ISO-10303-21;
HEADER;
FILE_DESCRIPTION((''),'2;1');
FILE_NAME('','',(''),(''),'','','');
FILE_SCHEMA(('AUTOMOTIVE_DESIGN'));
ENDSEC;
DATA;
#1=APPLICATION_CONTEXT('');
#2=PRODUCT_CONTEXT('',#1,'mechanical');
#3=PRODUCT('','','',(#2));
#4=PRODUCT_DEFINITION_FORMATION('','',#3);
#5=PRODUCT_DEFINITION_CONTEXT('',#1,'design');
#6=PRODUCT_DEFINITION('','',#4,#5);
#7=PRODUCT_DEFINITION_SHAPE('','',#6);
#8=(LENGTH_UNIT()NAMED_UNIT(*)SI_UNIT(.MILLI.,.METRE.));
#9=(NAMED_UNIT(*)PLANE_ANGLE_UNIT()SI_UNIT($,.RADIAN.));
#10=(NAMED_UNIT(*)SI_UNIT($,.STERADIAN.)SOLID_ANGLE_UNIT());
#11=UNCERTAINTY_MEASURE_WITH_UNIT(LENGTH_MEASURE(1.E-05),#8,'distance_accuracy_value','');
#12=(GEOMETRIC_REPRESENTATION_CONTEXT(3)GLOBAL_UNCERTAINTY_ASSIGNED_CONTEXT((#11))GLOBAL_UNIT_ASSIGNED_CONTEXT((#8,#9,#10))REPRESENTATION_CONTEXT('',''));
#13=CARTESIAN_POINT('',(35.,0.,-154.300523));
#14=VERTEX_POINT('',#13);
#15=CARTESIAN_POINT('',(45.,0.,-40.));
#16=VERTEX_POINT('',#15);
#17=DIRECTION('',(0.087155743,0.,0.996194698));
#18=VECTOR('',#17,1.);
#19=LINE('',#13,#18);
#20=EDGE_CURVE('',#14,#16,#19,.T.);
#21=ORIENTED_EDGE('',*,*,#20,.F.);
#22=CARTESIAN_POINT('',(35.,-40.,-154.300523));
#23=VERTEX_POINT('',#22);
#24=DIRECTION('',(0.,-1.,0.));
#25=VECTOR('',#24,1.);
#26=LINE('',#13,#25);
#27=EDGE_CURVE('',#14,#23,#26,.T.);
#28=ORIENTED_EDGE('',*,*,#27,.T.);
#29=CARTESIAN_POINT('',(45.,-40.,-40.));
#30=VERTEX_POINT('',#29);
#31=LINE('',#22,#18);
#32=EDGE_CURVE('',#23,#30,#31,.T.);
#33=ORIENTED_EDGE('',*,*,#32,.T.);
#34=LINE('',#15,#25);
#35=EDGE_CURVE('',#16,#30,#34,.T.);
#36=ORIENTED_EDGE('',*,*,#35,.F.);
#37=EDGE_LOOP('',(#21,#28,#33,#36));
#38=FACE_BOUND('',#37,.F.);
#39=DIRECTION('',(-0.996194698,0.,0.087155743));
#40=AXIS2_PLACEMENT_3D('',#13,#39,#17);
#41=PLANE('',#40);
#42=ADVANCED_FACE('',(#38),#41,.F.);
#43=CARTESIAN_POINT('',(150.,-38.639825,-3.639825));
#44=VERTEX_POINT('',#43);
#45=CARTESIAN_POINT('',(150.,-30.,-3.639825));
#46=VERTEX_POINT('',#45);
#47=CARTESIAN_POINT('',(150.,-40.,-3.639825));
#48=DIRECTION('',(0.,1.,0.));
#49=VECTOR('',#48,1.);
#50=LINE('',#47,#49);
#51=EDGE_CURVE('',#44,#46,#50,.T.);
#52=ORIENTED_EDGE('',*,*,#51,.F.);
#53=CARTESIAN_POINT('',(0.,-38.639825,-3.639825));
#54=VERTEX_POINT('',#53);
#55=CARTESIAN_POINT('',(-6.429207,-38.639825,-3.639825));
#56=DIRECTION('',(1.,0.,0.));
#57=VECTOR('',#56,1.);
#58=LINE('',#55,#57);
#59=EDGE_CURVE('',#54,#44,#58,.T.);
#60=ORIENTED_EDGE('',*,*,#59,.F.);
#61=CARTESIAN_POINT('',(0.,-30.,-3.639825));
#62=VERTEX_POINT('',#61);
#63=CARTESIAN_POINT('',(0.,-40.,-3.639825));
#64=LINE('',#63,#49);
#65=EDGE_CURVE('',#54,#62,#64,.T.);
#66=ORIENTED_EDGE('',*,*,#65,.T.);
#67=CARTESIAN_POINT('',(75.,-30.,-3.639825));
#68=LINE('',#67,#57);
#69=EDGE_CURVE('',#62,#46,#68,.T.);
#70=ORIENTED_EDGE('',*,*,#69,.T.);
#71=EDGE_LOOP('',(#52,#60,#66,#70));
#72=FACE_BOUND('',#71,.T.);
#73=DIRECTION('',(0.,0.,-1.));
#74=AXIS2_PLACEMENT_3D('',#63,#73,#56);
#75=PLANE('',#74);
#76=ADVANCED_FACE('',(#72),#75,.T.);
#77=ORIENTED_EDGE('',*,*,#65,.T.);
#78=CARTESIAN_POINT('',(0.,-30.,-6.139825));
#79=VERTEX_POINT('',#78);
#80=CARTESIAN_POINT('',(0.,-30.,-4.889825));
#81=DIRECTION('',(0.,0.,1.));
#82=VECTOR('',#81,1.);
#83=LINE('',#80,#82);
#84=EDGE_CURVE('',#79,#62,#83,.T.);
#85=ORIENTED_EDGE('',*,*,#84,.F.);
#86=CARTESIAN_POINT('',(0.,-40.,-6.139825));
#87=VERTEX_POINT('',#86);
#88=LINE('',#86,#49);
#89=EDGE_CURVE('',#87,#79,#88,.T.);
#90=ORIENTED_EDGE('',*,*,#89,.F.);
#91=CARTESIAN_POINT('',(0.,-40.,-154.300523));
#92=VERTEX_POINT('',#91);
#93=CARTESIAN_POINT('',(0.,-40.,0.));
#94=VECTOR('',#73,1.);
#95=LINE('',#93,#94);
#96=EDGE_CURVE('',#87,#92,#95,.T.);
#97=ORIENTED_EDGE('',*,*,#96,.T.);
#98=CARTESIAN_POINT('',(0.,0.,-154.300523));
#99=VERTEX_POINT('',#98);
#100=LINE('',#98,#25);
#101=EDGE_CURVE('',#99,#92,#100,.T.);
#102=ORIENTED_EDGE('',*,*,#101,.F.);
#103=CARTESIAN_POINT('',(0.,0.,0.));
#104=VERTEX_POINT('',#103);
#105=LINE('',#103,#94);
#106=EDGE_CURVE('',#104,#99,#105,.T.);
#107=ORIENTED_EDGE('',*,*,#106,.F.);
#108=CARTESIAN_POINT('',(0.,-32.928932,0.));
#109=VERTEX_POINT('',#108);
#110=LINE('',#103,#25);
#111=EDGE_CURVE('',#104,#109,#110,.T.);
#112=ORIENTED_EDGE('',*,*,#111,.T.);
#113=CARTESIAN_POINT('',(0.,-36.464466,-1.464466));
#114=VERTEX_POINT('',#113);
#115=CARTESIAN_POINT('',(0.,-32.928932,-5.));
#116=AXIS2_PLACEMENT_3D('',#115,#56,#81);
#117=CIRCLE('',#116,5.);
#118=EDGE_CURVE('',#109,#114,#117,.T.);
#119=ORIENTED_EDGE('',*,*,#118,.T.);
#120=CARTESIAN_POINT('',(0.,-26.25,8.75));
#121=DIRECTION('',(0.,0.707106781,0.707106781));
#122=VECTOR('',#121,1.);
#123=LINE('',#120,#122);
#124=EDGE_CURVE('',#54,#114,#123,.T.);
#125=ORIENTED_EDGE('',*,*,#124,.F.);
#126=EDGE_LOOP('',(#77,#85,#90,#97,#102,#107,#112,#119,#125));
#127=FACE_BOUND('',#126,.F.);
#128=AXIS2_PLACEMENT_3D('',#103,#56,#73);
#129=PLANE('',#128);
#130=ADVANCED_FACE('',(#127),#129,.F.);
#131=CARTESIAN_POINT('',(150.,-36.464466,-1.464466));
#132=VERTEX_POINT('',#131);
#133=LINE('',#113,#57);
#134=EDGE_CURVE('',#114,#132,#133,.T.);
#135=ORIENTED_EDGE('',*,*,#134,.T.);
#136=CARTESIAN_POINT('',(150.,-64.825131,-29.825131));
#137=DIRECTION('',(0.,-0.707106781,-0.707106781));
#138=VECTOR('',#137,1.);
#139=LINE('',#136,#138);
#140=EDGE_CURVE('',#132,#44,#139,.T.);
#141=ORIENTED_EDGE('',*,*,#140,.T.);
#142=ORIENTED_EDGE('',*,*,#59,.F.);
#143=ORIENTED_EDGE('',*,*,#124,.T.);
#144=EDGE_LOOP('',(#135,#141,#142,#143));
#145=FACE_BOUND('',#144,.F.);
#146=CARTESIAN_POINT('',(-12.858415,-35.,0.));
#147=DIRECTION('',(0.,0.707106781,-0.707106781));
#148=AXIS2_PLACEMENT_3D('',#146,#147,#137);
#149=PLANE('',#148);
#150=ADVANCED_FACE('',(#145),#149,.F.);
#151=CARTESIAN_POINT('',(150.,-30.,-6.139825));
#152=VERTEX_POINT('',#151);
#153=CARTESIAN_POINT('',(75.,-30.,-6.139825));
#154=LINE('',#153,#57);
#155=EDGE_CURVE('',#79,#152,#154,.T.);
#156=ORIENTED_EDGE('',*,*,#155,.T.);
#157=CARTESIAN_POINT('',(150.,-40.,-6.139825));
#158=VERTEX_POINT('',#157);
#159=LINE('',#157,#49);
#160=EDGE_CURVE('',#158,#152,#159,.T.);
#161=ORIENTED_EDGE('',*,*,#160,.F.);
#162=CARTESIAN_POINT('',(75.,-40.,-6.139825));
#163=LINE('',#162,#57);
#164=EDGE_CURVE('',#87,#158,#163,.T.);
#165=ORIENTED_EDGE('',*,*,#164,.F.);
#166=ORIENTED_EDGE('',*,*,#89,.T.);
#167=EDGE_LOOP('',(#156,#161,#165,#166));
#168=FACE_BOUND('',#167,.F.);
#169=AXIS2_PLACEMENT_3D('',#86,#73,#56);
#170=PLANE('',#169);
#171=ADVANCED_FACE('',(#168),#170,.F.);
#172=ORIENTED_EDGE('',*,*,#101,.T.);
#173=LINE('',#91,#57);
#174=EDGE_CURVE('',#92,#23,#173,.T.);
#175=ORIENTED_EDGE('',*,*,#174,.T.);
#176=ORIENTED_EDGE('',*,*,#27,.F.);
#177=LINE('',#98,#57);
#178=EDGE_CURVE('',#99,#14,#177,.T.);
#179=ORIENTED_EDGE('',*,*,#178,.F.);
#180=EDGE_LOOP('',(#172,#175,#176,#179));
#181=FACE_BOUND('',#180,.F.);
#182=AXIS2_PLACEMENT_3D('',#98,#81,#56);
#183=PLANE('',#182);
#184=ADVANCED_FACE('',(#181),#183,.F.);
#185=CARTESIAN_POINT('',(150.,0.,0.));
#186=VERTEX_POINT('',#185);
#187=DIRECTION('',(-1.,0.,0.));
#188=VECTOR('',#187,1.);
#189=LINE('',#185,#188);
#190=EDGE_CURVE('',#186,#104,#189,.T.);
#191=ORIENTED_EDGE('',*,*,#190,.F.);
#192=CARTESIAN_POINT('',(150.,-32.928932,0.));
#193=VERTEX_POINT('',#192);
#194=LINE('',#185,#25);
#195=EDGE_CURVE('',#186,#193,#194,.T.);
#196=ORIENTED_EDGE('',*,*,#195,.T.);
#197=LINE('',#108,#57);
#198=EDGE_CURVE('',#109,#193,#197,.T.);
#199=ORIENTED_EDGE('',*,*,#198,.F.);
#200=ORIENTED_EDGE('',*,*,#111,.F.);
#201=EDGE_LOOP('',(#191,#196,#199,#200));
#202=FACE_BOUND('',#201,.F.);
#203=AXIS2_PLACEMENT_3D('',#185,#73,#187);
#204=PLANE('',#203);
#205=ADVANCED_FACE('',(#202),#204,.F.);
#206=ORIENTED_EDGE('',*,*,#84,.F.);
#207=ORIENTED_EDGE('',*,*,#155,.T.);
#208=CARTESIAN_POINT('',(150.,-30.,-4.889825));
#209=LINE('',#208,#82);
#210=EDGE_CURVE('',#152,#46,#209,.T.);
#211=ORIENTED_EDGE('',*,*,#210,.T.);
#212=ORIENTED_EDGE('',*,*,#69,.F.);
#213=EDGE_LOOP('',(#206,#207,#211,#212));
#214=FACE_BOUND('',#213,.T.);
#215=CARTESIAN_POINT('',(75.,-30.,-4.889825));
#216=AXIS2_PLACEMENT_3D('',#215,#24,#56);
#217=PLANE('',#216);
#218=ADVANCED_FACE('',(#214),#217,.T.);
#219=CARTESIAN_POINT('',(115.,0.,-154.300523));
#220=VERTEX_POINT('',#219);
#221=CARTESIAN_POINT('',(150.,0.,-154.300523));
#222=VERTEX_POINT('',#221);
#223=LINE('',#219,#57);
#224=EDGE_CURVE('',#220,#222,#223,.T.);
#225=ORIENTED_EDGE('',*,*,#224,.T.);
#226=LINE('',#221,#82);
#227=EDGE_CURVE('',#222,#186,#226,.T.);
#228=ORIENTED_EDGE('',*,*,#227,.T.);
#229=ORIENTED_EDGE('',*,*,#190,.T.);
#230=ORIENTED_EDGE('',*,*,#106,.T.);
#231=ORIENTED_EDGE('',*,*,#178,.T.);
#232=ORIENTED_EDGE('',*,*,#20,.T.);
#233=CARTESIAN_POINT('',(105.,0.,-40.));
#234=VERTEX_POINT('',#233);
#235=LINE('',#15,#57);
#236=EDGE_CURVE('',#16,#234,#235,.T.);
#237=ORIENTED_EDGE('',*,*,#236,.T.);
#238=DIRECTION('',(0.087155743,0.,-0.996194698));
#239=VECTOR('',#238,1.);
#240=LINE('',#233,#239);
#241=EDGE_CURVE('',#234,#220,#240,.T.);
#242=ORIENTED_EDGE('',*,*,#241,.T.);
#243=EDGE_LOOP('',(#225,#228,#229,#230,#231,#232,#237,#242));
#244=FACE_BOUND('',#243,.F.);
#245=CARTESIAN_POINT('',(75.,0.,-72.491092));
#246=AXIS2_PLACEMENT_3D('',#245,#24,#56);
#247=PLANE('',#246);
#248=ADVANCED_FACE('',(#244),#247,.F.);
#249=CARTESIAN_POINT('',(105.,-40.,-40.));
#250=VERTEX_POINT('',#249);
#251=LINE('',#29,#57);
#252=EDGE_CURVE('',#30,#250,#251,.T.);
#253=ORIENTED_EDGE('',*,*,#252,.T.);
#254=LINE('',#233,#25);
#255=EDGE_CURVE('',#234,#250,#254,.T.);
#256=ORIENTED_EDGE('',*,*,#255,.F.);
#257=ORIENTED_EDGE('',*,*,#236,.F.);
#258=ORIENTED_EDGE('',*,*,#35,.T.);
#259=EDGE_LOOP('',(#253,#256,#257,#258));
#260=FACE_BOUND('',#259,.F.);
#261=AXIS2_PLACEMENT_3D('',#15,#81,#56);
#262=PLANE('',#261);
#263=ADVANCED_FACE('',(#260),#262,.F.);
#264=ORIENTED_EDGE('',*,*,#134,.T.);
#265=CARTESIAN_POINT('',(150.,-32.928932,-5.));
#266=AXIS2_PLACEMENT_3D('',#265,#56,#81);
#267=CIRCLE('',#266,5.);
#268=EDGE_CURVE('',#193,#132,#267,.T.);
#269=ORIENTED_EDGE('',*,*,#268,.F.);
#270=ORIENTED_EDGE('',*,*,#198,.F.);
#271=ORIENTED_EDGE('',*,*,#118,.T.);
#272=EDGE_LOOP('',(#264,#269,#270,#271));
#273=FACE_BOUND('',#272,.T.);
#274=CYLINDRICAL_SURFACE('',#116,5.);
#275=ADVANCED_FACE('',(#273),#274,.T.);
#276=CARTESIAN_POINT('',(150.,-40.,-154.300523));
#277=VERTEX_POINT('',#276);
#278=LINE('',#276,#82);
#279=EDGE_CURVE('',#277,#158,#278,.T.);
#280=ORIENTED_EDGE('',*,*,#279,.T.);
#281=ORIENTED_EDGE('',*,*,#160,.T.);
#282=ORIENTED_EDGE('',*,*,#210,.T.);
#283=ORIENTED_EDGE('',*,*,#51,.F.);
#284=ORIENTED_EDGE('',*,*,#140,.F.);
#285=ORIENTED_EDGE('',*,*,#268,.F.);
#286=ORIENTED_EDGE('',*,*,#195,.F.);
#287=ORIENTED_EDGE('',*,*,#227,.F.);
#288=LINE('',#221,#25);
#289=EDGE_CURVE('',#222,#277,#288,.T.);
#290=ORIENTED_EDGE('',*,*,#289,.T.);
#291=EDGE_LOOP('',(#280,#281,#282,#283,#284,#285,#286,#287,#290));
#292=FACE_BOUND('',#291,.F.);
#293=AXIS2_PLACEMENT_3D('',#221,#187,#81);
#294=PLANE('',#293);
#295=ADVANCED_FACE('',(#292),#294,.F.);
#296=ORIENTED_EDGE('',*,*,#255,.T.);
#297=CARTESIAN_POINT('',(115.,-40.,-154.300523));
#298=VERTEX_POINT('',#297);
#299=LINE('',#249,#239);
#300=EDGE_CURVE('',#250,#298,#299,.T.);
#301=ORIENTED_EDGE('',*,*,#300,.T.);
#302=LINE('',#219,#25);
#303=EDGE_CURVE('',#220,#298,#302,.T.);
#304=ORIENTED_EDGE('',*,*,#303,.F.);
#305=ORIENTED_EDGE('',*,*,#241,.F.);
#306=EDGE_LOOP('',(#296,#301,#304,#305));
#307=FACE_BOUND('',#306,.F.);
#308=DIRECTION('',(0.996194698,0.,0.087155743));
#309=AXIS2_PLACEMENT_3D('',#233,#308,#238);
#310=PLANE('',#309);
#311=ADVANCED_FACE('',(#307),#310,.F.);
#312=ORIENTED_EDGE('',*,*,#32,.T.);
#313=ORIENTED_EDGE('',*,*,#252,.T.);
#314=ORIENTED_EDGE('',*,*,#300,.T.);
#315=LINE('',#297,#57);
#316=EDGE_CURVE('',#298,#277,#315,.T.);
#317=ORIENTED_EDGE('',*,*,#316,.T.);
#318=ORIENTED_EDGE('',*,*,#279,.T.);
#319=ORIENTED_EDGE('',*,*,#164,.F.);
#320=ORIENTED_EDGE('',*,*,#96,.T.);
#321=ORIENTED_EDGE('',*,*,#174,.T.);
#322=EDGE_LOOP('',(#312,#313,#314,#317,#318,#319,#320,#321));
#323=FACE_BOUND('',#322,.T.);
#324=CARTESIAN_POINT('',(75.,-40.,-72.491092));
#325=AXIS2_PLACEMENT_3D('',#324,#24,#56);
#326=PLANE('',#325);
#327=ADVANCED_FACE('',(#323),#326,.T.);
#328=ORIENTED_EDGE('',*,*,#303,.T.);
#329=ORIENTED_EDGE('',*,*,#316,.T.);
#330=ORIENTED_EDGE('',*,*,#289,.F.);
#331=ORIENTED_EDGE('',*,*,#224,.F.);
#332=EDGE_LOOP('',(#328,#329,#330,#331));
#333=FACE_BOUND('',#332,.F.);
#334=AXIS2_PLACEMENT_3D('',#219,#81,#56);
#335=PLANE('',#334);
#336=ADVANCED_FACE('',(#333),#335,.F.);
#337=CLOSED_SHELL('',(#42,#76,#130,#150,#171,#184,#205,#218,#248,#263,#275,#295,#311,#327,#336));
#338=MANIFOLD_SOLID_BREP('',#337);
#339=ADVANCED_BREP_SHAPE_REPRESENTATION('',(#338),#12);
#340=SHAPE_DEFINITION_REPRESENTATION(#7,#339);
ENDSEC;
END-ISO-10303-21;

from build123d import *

# Parameters (mm, degrees)
F1_DEPTH    = 40
F2_W        = 150
F2_H        = 2.5
F3_DEPTH    = 10
F4_T1_DEPTH = 175.7168298797
F5_R        = 5


# Not quite as in the source:
# - a fillet or chamfer that OpenCascade refuses, or shapes differently, is made with other operations: its cross-section is extruded or revolved along the edge and cut away or added


with BuildPart() as f1:
    # F0 (on Front) → F1 (new body)
    with BuildSketch(Plane.XZ):
        Polygon((150, 0), (0, 0), (0, -154.3005230276), (35, -154.3005230276), (45, -40), (105, -40), (115, -154.3005230276), (150, -154.3005230276), align=None)
    extrude(amount=F1_DEPTH)

    # F2 (on face) → F3 (cut)
    with BuildSketch(Plane.XZ.offset(40)):
        with Locations((75, -4.8898250982)):
            Rectangle(F2_W, F2_H)
    extrude(amount=-F3_DEPTH, mode=Mode.SUBTRACT)

    # F4: chamfer of 5 on 1 edges, made by hand

    # F4_s2 → F4_t1 (cut)
    with BuildSketch(Plane.YZ.offset(-12.8584149398)):
        Polygon((-35, 0), (-40, -5), (-40, 0), align=None)
    extrude(amount=F4_T1_DEPTH, mode=Mode.SUBTRACT)

    # F5
    f5_edges = [f1.edges().sort_by_distance(p)[0] for p in [
        (75, -35, 0),
    ]]
    fillet(f5_edges, radius=F5_R)


solid = f1.part
